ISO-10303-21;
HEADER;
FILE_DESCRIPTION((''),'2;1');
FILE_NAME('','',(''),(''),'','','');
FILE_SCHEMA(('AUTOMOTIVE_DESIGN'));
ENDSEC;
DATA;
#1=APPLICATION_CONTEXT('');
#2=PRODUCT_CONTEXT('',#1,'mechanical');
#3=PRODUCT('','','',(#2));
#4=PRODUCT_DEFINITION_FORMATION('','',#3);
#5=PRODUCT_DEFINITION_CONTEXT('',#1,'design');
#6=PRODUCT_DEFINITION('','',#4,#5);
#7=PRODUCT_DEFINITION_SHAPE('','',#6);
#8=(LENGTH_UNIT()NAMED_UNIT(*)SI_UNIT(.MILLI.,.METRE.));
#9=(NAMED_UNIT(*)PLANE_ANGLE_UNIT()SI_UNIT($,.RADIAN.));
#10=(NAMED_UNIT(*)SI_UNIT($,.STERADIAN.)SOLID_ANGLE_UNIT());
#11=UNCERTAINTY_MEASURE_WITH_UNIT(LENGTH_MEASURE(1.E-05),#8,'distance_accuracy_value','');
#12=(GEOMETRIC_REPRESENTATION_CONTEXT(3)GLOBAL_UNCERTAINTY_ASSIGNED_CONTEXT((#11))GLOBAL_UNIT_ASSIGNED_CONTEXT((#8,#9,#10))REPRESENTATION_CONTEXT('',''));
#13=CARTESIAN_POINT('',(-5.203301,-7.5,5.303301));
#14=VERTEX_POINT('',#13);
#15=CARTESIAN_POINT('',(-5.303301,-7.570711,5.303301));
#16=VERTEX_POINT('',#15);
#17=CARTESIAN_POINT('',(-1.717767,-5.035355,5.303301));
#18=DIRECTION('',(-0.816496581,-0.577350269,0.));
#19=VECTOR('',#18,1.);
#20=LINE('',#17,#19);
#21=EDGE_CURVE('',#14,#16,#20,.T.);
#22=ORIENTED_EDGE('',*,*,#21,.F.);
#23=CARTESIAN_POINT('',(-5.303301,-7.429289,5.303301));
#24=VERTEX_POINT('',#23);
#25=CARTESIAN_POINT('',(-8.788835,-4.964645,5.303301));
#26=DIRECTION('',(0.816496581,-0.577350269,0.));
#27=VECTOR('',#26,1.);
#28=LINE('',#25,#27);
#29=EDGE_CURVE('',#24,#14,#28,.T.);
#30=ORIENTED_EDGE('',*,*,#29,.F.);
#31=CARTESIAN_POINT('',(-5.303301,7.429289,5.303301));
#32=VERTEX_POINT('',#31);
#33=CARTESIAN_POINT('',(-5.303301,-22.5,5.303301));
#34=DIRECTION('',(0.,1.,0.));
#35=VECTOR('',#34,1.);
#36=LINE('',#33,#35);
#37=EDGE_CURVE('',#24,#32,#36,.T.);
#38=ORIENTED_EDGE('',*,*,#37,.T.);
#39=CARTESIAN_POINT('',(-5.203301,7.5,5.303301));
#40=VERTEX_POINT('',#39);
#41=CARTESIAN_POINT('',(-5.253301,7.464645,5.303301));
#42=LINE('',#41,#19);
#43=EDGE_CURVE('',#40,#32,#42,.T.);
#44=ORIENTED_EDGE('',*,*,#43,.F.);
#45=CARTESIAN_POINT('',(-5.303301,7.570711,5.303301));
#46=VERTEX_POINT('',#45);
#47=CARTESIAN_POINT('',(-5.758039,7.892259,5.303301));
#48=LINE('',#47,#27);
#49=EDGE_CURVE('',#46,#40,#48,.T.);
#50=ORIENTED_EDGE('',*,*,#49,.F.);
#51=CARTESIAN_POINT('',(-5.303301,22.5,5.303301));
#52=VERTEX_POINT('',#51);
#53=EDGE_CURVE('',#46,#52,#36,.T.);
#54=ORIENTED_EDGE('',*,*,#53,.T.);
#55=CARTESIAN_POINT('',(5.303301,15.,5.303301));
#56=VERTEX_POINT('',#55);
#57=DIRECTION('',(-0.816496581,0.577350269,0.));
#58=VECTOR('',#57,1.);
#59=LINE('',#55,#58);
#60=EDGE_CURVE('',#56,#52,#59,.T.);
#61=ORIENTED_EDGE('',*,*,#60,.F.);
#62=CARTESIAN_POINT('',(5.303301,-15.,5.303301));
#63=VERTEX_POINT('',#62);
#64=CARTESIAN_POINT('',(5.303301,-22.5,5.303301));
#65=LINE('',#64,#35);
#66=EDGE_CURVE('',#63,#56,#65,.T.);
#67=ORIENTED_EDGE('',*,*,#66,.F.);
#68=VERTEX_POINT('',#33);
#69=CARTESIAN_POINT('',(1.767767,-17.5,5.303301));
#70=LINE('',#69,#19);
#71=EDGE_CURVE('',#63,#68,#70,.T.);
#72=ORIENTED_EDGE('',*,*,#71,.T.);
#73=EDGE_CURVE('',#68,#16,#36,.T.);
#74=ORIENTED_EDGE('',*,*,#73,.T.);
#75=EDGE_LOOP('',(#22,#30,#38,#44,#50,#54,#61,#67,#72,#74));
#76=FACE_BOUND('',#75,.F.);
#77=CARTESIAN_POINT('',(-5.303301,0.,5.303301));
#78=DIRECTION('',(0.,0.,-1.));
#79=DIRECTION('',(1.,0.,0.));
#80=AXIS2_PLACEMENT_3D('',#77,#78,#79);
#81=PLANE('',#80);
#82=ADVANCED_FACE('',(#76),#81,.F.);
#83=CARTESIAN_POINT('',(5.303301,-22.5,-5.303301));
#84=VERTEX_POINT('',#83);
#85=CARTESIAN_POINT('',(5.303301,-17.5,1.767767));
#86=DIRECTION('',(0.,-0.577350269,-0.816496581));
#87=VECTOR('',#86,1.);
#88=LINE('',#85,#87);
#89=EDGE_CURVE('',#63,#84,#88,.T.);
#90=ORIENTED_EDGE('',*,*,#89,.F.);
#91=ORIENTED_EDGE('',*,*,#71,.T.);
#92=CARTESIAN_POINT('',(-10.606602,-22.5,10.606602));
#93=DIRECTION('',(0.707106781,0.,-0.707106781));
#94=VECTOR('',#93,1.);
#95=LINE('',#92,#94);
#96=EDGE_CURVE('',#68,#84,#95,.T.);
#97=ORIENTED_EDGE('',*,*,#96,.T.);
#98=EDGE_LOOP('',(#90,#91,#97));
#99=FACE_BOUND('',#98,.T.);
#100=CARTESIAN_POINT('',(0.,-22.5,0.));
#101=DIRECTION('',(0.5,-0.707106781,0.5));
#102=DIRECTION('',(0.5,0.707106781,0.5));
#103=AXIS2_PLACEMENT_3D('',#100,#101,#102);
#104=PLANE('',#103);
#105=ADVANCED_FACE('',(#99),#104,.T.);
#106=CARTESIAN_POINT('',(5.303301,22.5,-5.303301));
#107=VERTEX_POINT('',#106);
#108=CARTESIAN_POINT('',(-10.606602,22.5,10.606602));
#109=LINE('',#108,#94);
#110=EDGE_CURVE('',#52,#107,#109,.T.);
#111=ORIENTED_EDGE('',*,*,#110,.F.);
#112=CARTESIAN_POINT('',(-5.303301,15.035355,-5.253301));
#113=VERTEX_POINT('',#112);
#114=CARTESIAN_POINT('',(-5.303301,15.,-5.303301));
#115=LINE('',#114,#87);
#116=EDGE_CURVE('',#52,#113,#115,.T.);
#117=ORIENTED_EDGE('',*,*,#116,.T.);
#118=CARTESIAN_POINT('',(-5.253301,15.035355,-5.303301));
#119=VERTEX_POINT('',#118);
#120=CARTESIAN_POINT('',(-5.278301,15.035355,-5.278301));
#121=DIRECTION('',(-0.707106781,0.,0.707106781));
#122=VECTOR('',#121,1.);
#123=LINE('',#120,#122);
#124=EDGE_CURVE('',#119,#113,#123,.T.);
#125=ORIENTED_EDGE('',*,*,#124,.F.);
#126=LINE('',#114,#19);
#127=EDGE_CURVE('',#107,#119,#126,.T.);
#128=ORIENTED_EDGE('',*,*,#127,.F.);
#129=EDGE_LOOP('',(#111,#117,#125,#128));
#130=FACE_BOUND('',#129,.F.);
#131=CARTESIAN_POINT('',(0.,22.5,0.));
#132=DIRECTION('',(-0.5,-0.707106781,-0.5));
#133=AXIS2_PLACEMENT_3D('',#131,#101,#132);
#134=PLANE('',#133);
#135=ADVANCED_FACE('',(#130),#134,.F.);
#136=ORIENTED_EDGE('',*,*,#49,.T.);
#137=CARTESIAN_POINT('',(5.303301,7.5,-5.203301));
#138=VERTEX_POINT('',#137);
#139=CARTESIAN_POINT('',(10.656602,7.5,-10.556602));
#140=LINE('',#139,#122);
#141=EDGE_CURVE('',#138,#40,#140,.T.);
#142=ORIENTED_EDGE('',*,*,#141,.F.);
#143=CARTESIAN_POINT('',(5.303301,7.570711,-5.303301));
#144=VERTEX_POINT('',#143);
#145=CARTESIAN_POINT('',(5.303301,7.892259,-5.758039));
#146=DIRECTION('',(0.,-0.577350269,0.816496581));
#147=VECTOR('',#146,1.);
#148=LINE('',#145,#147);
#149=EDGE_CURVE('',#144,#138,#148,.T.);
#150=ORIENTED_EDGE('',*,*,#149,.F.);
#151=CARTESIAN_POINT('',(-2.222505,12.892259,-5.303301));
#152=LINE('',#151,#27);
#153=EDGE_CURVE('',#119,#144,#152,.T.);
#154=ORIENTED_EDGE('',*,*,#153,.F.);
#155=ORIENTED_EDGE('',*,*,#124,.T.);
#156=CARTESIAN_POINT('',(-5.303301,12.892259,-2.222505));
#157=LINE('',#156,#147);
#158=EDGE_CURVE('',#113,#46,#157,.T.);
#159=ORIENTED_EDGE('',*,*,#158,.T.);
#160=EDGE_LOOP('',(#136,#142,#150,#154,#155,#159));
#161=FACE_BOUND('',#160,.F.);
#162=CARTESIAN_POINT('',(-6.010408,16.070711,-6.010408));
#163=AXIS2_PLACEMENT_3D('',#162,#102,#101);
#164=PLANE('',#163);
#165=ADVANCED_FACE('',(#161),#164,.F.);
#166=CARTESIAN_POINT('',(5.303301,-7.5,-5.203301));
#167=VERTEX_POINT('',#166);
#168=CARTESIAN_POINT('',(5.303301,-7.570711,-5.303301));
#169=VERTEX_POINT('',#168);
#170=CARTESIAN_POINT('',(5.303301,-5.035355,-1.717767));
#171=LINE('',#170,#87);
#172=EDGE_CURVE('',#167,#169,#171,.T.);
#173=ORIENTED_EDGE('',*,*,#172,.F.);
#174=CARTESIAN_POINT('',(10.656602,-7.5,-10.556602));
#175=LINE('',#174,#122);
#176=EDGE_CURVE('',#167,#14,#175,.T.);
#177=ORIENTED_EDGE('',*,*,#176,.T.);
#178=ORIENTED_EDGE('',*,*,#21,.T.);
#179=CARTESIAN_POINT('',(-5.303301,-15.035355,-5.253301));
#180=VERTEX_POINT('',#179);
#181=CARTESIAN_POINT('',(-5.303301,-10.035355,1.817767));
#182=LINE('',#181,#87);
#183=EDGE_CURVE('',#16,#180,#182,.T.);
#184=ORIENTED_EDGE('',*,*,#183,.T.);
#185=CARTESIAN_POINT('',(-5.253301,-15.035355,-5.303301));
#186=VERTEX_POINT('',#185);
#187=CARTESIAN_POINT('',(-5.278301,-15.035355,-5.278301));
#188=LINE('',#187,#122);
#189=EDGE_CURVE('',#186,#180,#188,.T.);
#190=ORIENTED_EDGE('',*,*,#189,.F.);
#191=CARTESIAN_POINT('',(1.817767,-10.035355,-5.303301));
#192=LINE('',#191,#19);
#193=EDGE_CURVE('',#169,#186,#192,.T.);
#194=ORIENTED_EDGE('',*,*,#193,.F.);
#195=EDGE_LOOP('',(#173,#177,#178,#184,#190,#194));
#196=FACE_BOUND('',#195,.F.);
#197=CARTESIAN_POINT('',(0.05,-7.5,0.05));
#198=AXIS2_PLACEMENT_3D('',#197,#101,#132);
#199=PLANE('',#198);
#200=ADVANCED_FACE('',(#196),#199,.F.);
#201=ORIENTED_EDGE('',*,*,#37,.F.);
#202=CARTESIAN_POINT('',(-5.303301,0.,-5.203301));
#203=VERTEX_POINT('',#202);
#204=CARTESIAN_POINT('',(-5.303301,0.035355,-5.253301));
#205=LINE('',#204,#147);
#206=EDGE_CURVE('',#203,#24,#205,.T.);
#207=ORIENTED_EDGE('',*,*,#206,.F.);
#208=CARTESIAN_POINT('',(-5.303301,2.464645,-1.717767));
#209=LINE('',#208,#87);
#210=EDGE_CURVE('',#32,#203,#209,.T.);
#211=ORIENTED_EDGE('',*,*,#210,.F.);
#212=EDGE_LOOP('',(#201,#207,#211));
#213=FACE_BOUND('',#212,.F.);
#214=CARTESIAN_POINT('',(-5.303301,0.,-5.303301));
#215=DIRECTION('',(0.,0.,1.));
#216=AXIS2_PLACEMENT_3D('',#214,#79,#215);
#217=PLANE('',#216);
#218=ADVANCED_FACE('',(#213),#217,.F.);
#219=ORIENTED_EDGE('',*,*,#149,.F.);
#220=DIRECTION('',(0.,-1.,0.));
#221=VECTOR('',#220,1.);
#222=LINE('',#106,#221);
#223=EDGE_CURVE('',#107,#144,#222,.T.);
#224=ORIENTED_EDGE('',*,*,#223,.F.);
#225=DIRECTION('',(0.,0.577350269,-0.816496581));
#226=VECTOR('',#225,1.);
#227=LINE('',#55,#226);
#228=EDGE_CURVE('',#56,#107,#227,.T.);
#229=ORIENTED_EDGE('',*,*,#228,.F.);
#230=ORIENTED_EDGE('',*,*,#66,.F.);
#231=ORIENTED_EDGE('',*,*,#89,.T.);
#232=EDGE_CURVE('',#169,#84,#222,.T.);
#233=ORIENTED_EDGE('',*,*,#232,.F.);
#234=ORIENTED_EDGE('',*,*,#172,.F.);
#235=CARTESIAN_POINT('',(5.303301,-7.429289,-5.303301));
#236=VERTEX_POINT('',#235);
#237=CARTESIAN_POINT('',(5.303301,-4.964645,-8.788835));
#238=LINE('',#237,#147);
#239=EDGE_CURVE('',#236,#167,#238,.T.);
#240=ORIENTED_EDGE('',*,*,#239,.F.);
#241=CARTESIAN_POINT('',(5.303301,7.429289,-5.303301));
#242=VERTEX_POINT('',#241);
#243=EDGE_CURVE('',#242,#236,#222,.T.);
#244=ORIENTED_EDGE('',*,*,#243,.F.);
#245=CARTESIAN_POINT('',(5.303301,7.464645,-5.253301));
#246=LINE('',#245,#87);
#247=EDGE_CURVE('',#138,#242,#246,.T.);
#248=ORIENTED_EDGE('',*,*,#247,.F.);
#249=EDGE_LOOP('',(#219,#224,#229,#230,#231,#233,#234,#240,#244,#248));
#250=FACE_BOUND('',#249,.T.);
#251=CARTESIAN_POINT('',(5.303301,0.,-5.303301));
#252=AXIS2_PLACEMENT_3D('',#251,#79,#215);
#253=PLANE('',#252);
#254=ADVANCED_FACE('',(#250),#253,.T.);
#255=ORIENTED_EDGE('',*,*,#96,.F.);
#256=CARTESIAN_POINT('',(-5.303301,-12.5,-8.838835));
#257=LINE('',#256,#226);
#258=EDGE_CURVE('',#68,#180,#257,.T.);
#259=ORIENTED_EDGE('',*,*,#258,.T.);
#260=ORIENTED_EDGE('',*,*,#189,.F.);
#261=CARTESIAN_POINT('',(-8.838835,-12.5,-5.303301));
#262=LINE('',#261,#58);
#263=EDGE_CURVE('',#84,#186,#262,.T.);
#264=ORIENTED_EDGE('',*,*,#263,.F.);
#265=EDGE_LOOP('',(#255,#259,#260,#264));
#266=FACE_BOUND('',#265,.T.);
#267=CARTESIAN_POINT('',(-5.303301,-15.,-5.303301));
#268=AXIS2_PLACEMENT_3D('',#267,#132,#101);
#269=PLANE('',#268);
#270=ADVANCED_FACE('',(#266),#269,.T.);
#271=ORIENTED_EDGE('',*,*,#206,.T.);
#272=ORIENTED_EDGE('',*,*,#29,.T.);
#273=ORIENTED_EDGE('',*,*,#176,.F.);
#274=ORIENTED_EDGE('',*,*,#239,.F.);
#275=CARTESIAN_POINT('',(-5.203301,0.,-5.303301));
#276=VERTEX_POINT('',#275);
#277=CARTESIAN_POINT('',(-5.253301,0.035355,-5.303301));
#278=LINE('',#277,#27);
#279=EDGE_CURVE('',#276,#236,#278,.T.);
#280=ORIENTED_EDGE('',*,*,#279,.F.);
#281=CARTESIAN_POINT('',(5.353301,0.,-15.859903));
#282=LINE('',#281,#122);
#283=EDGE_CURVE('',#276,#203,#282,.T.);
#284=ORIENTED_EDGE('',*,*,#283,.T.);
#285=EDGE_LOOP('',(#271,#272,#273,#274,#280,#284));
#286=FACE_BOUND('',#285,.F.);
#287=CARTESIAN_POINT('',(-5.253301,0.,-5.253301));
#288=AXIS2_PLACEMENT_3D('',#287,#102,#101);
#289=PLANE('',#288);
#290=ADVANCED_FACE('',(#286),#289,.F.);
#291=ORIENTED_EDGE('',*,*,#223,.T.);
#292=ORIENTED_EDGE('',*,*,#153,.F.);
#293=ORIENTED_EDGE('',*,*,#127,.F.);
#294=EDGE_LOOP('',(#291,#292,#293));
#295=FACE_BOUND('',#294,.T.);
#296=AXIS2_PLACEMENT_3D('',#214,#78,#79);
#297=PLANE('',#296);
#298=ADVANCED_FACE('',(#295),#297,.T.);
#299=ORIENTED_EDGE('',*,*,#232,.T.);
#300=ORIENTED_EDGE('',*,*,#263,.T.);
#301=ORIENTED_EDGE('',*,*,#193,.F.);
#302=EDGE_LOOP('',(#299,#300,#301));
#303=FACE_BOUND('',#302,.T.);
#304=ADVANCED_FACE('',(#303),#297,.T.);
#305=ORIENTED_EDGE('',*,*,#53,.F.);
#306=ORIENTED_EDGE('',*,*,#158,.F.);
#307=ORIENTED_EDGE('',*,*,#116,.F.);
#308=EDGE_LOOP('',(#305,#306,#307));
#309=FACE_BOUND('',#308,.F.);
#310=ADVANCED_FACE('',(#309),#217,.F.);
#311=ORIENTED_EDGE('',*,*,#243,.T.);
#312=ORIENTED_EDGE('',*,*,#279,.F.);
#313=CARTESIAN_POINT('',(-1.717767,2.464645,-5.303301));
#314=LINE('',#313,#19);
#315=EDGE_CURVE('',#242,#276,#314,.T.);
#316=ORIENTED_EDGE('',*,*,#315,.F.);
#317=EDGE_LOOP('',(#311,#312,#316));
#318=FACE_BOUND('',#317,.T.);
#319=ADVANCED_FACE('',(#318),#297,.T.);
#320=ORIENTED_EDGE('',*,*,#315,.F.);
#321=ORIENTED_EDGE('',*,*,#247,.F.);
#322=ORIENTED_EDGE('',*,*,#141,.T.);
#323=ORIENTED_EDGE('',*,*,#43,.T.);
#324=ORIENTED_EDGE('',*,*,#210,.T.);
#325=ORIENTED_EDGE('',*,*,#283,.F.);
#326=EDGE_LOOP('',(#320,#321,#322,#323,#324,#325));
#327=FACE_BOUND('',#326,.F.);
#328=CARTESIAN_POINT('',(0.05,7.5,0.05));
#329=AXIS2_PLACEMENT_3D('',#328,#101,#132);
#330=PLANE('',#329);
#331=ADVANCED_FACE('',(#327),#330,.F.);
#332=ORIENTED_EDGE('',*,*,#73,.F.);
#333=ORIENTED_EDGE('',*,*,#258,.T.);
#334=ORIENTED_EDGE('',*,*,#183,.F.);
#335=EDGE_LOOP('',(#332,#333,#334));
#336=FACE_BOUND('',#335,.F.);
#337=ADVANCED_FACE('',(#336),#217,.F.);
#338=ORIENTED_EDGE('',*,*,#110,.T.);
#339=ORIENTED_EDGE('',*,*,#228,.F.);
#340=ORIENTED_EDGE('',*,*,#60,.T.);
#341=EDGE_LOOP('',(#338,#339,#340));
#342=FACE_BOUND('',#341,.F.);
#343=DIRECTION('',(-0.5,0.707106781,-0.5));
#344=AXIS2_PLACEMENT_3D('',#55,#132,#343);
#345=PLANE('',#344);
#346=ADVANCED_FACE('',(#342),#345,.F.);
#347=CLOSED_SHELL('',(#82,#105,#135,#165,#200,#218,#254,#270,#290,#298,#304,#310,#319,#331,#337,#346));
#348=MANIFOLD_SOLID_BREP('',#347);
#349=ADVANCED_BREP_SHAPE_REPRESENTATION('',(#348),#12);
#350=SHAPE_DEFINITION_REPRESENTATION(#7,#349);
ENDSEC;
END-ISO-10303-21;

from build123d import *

# Parameters (mm, degrees)
F0_W     = 10.6066017178
F0_H     = 10.6066017178
F1_DEPTH = 22.5
F4_DEPTH = 15
F6_DEPTH = 15
F8_DEPTH = 15


# Not quite as in the source:
# - a feature names something its author has since deleted; it is built from what else it names


with BuildPart() as f1:
    # F0 (on Front) → F1 (new body, symmetric)
    with BuildSketch(Plane.XZ):
        Rectangle(F0_W, F0_H)
    extrude(amount=F1_DEPTH, both=True)

    # F3 (on 3pt) → F4 (cut, symmetric)
    with BuildSketch(Plane(origin=(0, 0, 0), x_dir=(0, 1, 0), z_dir=(0.7071067812, 0, -0.7071067812))):
        Polygon((-15, -7.5), (-22.5, 0), (-15, 7.5), (-15, 9.5), (-24.5, 9.5), (-24.5, -9.5), (-15, -9.5), align=None)
        Polygon((15, 7.5), (22.5, 0), (15, -7.5), (15, -9.5), (24.5, -9.5), (24.5, 9.5), (15, 9.5), align=None)
    extrude(amount=F4_DEPTH, both=True, mode=Mode.SUBTRACT)

    # F5 (on 3pt) → F6 (cut, symmetric)
    with BuildSketch(Plane(origin=(0, 0, 0), x_dir=(0, 1, 0), z_dir=(0.7071067812, 0, -0.7071067812))):
        Polygon((7.5, 0), (0, -7.5), (-7.5, 0), (-15, -7.5), (-15, -9.5), (15, -9.5), (15, -7.5), align=None)
    extrude(amount=F6_DEPTH, both=True, mode=Mode.SUBTRACT)

    # F7 (on 3pt) → F8 (cut, symmetric)
    with BuildSketch(Plane(origin=(0, 0, 0), x_dir=(0, 1, 0), z_dir=(0.7071067812, 0, -0.7071067812))):
        Polygon((-7.5, 0.0707106781), (-16.0707106781, -8.5), (16.0707106781, -8.5), (7.5, 0.0707106781), (0, -7.4292893219), align=None)
    extrude(amount=F8_DEPTH, both=True, mode=Mode.SUBTRACT)


solid = f1.part
